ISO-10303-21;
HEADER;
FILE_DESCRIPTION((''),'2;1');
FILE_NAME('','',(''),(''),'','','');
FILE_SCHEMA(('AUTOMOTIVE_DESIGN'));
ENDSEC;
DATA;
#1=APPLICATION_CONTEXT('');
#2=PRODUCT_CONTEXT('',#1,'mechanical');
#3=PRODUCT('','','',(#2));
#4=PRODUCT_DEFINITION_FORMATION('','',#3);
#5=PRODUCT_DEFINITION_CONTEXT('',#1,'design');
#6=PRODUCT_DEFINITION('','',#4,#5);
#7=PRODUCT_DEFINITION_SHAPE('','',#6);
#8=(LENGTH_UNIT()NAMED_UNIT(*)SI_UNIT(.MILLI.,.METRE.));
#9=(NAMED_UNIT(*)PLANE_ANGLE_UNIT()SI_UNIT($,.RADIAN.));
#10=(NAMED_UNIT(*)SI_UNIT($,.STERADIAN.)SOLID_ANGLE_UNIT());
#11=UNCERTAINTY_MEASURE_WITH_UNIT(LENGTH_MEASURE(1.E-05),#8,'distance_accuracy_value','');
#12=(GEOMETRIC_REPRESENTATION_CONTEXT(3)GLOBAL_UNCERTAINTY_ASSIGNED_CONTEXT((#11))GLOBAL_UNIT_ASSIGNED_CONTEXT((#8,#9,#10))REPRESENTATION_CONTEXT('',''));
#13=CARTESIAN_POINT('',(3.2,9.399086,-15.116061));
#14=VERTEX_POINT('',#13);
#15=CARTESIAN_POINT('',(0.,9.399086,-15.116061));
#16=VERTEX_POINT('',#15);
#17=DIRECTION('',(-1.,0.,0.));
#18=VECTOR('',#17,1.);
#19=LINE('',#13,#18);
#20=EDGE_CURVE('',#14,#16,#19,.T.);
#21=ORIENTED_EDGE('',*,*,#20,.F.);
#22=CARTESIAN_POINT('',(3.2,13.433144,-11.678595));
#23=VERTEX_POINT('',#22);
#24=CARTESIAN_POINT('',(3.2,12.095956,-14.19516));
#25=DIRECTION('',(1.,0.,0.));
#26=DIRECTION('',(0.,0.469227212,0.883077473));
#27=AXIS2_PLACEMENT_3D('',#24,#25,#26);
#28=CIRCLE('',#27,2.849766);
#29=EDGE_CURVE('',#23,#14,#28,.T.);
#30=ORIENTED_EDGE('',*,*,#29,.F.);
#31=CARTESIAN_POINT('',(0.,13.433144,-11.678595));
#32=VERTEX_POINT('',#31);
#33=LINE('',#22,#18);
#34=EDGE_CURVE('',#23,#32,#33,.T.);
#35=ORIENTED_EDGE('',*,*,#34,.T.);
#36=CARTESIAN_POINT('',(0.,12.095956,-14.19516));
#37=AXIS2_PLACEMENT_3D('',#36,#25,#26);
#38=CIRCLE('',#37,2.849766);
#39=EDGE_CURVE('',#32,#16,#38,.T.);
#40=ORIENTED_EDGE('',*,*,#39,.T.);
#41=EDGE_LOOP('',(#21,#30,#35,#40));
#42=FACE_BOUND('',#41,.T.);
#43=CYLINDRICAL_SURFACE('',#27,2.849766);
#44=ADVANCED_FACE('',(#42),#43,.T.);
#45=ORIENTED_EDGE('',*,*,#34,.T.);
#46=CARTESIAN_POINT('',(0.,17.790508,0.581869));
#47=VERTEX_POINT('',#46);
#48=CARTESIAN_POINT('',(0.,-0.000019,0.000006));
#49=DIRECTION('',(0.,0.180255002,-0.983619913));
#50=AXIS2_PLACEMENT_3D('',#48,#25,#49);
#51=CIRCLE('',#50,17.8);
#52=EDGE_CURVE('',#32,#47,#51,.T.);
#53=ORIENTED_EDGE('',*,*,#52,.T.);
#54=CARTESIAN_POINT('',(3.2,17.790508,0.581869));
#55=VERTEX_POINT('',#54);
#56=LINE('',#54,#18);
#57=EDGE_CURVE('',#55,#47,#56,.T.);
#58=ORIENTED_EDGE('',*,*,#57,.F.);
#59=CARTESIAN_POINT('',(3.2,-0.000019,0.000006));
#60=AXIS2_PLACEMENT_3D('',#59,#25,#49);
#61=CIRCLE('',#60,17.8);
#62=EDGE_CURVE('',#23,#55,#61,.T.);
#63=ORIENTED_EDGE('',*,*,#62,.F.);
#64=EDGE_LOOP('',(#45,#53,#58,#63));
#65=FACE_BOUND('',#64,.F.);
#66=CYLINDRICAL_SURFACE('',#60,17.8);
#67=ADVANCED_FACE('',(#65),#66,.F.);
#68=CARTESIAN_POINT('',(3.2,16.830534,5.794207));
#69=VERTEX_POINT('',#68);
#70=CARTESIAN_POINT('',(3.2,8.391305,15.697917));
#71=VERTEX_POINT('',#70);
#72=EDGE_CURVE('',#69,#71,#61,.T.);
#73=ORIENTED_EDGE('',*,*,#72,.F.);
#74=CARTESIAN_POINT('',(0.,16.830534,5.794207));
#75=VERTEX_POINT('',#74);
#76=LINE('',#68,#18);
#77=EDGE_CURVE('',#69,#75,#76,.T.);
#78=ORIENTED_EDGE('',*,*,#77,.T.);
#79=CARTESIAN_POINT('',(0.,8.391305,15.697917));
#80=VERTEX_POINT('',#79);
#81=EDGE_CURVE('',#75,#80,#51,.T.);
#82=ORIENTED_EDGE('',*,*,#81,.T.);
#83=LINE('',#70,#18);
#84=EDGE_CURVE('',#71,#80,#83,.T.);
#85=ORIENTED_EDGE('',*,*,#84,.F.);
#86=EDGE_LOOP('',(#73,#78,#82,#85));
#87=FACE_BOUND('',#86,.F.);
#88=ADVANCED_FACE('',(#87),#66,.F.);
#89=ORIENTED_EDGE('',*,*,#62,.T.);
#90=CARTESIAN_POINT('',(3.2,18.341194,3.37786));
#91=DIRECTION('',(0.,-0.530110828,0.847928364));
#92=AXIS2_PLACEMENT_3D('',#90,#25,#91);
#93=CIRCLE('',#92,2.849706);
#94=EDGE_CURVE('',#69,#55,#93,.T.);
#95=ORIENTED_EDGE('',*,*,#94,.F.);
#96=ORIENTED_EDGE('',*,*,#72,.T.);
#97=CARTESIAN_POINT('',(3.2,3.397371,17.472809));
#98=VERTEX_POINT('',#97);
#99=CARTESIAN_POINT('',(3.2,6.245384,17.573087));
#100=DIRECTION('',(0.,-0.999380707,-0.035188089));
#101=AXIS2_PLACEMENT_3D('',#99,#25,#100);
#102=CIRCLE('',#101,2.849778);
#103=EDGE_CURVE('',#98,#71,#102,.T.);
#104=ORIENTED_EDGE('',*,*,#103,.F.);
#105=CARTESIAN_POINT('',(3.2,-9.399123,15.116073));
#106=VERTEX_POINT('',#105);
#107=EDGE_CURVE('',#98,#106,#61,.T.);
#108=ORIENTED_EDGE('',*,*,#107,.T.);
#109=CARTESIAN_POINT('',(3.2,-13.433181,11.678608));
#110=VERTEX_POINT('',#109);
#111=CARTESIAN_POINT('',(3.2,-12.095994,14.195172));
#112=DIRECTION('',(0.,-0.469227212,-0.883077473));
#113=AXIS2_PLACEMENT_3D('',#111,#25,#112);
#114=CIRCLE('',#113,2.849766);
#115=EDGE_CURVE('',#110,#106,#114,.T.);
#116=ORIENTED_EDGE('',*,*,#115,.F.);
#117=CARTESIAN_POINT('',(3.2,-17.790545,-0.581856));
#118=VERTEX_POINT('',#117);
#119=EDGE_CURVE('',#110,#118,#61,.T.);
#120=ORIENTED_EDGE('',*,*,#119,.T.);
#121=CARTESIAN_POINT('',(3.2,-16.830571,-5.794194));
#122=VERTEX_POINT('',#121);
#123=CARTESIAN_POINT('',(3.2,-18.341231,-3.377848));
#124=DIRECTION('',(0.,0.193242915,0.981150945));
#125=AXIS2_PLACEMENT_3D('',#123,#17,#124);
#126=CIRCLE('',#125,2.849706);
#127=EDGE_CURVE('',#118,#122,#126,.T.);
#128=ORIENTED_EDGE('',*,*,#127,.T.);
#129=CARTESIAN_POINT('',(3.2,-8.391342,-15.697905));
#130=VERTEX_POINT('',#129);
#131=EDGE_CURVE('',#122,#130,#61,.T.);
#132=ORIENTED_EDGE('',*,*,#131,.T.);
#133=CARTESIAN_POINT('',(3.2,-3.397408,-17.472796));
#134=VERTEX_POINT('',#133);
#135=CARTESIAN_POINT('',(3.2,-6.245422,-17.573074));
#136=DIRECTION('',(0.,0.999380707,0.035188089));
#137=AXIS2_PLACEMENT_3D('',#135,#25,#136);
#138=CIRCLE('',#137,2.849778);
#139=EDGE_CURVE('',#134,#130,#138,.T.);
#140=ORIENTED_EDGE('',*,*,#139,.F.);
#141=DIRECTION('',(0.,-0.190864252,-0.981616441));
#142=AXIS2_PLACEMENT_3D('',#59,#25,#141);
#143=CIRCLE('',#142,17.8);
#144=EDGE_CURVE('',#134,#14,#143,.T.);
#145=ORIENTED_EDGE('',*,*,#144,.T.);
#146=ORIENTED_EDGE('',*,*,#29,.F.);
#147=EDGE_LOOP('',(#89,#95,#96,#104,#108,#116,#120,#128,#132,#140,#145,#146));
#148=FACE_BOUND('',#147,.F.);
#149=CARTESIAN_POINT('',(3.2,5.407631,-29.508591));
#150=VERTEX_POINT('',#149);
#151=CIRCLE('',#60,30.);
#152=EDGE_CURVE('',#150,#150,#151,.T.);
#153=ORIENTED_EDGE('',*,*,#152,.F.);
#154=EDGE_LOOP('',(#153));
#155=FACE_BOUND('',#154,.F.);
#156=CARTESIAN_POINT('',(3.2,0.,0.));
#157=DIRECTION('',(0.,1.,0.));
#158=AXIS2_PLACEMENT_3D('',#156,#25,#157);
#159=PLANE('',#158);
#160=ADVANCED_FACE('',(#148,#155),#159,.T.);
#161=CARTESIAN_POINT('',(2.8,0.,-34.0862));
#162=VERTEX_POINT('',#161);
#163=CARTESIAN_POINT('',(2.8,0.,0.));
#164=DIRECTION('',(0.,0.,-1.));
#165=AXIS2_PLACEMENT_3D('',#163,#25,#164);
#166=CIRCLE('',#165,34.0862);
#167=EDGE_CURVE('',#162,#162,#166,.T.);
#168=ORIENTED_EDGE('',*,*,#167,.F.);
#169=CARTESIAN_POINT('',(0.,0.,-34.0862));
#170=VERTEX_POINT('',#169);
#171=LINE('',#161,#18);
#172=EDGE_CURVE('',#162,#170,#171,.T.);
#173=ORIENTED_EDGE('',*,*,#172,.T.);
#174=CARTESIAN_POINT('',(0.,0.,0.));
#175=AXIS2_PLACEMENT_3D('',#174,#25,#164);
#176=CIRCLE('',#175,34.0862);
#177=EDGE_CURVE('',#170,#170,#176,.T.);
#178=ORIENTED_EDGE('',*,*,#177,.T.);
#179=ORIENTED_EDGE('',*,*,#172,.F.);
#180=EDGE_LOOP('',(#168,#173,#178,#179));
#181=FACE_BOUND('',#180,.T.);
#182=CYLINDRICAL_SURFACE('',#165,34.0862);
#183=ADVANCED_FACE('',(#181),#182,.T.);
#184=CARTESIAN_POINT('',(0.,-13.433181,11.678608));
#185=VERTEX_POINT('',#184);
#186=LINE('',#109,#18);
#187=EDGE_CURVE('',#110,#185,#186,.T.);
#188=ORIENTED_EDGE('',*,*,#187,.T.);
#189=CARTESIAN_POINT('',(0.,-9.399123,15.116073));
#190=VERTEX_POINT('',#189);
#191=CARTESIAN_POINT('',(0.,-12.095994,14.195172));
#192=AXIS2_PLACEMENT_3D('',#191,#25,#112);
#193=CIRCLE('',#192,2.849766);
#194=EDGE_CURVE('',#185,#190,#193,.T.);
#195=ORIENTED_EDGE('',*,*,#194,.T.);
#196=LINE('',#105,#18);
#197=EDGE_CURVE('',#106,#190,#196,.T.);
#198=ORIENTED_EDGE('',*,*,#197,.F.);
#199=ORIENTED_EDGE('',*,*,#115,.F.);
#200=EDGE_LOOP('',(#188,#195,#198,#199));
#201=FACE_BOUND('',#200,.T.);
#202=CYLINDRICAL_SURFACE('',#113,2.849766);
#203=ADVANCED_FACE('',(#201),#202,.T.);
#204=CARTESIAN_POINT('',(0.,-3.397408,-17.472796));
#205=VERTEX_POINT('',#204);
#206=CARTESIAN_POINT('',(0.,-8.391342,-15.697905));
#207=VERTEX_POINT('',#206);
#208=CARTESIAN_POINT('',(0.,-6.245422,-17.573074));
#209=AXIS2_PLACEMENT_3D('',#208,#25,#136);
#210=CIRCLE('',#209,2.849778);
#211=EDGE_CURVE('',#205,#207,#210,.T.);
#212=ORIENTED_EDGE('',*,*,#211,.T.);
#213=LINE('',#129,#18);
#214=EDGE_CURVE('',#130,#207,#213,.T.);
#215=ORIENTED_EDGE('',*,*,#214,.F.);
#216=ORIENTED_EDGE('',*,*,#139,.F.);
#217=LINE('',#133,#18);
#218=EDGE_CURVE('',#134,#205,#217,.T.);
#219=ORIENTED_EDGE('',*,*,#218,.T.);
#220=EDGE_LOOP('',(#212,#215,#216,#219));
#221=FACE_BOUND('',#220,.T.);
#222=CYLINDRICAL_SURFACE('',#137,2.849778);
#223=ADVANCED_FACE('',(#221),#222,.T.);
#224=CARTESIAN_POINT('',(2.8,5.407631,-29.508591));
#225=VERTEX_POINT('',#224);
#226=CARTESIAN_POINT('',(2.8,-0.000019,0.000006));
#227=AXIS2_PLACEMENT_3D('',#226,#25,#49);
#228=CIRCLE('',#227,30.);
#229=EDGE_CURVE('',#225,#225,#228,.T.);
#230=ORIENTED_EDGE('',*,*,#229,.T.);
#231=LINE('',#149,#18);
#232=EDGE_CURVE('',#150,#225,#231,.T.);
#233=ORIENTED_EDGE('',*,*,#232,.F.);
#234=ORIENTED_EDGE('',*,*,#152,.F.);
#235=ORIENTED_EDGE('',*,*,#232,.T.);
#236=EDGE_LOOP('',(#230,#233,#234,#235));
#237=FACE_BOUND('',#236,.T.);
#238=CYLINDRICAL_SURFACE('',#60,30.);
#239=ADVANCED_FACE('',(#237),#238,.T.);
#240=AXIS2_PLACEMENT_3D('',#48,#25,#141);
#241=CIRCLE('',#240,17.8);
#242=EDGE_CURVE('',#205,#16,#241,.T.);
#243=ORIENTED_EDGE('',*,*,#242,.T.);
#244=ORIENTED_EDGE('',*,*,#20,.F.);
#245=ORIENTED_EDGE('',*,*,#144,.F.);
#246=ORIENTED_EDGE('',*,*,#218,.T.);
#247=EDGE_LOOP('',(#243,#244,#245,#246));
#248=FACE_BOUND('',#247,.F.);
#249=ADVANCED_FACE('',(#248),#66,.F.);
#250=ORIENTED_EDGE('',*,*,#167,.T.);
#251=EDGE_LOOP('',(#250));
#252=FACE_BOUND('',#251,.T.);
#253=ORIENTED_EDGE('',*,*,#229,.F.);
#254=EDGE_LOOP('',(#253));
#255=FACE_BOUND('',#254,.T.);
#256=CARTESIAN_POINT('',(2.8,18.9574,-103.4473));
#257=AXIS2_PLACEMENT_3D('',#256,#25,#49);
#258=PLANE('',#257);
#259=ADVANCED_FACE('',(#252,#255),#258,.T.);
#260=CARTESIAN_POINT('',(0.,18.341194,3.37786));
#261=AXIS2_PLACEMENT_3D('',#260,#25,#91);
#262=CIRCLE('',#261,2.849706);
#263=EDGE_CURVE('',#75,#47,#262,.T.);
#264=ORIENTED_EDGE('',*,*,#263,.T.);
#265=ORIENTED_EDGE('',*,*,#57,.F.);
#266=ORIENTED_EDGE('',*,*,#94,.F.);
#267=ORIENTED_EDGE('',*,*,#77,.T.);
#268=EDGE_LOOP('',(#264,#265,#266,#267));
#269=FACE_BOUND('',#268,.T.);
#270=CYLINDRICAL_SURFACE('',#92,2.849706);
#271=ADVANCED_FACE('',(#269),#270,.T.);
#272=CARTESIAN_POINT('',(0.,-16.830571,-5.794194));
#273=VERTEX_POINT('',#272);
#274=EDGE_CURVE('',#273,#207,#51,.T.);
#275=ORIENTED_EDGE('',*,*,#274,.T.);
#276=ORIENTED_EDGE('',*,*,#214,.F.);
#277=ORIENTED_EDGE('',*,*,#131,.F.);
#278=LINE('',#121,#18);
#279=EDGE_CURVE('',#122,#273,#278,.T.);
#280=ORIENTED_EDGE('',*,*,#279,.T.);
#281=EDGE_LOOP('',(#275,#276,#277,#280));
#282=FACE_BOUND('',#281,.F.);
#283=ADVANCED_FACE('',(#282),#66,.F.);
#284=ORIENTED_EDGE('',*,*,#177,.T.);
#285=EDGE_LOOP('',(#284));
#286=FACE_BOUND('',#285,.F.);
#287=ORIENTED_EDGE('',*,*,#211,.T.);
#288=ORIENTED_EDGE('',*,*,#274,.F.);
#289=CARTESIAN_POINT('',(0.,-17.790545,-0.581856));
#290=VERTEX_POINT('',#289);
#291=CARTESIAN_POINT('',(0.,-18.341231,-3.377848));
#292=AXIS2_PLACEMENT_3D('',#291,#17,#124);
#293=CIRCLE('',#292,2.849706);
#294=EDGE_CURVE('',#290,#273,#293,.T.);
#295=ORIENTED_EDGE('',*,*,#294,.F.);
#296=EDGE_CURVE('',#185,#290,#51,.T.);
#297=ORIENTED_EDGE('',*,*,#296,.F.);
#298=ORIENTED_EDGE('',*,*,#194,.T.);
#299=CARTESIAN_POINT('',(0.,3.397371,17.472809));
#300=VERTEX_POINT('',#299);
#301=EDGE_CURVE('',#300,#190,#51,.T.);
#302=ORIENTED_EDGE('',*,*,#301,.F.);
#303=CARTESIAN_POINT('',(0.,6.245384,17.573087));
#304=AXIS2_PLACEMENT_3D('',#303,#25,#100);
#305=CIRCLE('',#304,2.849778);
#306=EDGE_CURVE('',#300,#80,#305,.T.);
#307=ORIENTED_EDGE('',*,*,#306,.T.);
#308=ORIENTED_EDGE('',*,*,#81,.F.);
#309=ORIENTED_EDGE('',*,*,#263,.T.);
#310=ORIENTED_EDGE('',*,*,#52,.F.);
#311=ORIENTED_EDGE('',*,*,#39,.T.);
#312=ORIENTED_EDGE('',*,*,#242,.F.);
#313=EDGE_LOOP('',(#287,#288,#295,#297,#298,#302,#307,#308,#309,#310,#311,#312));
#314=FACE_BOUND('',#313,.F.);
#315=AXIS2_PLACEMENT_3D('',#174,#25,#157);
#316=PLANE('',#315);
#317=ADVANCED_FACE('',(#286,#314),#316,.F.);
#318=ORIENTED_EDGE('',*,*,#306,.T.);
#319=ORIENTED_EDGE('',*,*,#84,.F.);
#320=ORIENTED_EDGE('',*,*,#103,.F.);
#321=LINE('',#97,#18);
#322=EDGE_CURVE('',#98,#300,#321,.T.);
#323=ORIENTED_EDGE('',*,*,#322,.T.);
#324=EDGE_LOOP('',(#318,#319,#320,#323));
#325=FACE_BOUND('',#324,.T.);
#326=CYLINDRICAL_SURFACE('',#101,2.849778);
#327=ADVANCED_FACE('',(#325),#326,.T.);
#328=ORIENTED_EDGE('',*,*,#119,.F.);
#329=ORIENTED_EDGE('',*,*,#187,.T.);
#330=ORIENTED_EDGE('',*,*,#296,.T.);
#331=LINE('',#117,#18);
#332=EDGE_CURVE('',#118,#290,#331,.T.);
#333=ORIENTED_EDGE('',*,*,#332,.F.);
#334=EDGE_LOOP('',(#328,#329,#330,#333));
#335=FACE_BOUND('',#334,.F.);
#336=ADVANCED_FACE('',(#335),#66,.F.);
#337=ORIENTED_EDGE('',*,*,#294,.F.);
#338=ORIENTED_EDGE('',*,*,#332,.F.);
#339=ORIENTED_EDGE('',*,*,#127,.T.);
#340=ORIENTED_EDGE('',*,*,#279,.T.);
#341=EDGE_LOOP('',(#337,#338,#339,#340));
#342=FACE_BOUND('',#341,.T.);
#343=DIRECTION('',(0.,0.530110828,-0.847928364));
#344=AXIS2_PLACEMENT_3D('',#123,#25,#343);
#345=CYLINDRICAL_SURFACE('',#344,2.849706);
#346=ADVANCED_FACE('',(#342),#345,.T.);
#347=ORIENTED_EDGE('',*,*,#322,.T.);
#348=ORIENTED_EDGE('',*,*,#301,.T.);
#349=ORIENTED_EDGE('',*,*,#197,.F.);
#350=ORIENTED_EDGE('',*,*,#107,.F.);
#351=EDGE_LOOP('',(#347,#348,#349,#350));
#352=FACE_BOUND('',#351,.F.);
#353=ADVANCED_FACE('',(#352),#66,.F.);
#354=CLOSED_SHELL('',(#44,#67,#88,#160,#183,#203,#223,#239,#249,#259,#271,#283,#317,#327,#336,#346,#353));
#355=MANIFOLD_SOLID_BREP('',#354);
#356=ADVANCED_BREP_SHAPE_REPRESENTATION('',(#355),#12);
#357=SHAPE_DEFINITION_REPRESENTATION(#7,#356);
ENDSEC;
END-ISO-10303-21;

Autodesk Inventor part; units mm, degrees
ref_plane "YZ Plane" through (0, 0, 0) normal (1, 0, 0) x (0, 1, 0)
ref_plane "XZ Plane" through (0, 0, 0) normal (0, 1, 0) x (-1, 0, 0)
ref_plane "XY Plane" through (0, 0, 0) normal (0, 0, 1) x (1, 0, 0)
sketch "Sketch_1" plane through (0, 0, 0) normal (0, 0, 1) x (1, 0, 0)
  line L0 (7.2, 0) -> (0, 0)
  line L1 (0, 8.5) -> (3.2, 8.5)
  line L2 (3.2, 8.5) -> (3.2, 105.8394)
  arc A0 (3.2, 105.8394) -> (2.2899, 109) centre (-4.7294, 105.2675) ccw
  line L3 (2.2899, 109) -> (0.7899, 109)
  arc A1 (0.7899, 109) -> (0, 105.8394) centre (7.9441, 105.5329) ccw
  line L4 (0, 105.8394) -> (0, 8.5)
  dimension "d16" = 1.5
  dimension "d17" = 3.2
revolve "Revolution1" add sketch "Sketch_1" angle 360 about axis through (7.2, 0, 0) along (1, 0, 0)
sketch "Sketch_2" plane through (3.6, 0, 0) normal (1, 0, 0) x (0, 0, -1)
  circle A0 centre (0, 0) radius 145.3333
  arc A1 (-108.9989, 0.5) -> (-108.9989, -0.5) centre (0, 0) ccw
  line L0 (-108.9989, -0.5) -> (-103.5248, -2.6502)
  arc A2 (-103.0895, -9.8477) -> (-103.5248, -2.6502) centre (-104.9781, -6.35) ccw
  line L1 (-103.0895, -9.8477) -> (-108.2644, -12.642)
  arc A3 (-108.2644, -12.642) -> (-108.1439, -13.6347) centre (0, 0) ccw
  line L2 (-108.1439, -13.6347) -> (-102.4506, -15.1094)
  arc A4 (-101.1508, -22.2019) -> (-102.4506, -15.1094) centre (-103.4473, -18.9574) ccw
  line L3 (-101.1508, -22.2019) -> (-105.9512, -25.5997)
  arc A5 (-105.9512, -25.5997) -> (-105.7119, -26.5706) centre (0, 0) ccw
  line L4 (-105.7119, -26.5706) -> (-99.8824, -27.3483)
  arc A6 (-97.7372, -34.2324) -> (-99.8824, -27.3483) centre (-100.408, -31.2884) ccw
  line L5 (-97.7372, -34.2324) -> (-102.093, -38.184)
  arc A7 (-102.093, -38.184) -> (-101.7384, -39.119) centre (0, 0) ccw
  line L6 (-101.7384, -39.119) -> (-95.8576, -39.1884)
  arc A8 (-92.8983, -45.7638) -> (-95.8576, -39.1884) centre (-95.9045, -43.1631) ccw
  line L7 (-92.8983, -45.7638) -> (-96.7461, -50.2116)
  arc A9 (-96.7461, -50.2116) -> (-96.2813, -51.097) centre (0, 0) ccw
  line L8 (-96.2813, -51.097) -> (-90.4351, -50.457)
  arc A10 (-86.7048, -56.6277) -> (-90.4351, -50.457) centre (-90.0025, -54.4084) ccw
  line L9 (-86.7048, -56.6277) -> (-89.9883, -61.5069)
  arc A11 (-89.9883, -61.5069) -> (-89.4203, -62.3299) centre (0, 0) ccw
  line L10 (-89.4203, -62.3299) -> (-83.6938, -60.9899)
  arc A12 (-79.2469, -66.666) -> (-83.6938, -60.9899) centre (-82.7881, -64.8603) ccw
  line L11 (-79.2469, -66.666) -> (-81.9184, -71.9054)
  arc A13 (-81.9184, -71.9054) -> (-81.2553, -72.6539) centre (0, 0) ccw
  line L12 (-81.2553, -72.6539) -> (-75.732, -70.6334)
  arc A14 (-70.6334, -75.732) -> (-75.732, -70.6334) centre (-74.3664, -74.3664) ccw
  line L13 (-70.6334, -75.732) -> (-72.6539, -81.2553)
  arc A15 (-72.6539, -81.2553) -> (-71.9054, -81.9184) centre (0, 0) ccw
  line L14 (-71.9054, -81.9184) -> (-66.666, -79.2469)
  arc A16 (-60.9899, -83.6938) -> (-66.666, -79.2469) centre (-64.8603, -82.7881) ccw
  line L15 (-60.9899, -83.6938) -> (-62.3299, -89.4203)
  arc A17 (-62.3299, -89.4203) -> (-61.5069, -89.9883) centre (0, 0) ccw
  line L16 (-61.5069, -89.9883) -> (-56.6277, -86.7048)
  arc A18 (-50.457, -90.4351) -> (-56.6277, -86.7048) centre (-54.4084, -90.0025) ccw
  line L17 (-50.457, -90.4351) -> (-51.097, -96.2813)
  arc A19 (-51.097, -96.2813) -> (-50.2116, -96.7461) centre (0, 0) ccw
  line L18 (-50.2116, -96.7461) -> (-45.7638, -92.8983)
  arc A20 (-39.1884, -95.8576) -> (-45.7638, -92.8983) centre (-43.1631, -95.9045) ccw
  line L19 (-39.1884, -95.8576) -> (-39.119, -101.7384)
  arc A21 (-39.119, -101.7384) -> (-38.184, -102.093) centre (0, 0) ccw
  line L20 (-38.184, -102.093) -> (-34.2324, -97.7372)
  arc A22 (-27.3483, -99.8824) -> (-34.2324, -97.7372) centre (-31.2884, -100.408) ccw
  line L21 (-27.3483, -99.8824) -> (-26.5706, -105.7119)
  arc A23 (-26.5706, -105.7119) -> (-25.5997, -105.9512) centre (0, 0) ccw
  line L22 (-25.5997, -105.9512) -> (-22.2019, -101.1508)
  arc A24 (-15.1094, -102.4506) -> (-22.2019, -101.1508) centre (-18.9574, -103.4473) ccw
  line L23 (-15.1094, -102.4506) -> (-13.6347, -108.1439)
  arc A25 (-13.6347, -108.1439) -> (-12.642, -108.2644) centre (0, 0) ccw
  line L24 (-12.642, -108.2644) -> (-9.8477, -103.0895)
  arc A26 (-2.6502, -103.5248) -> (-9.8477, -103.0895) centre (-6.35, -104.9781) ccw
  line L25 (-2.6502, -103.5248) -> (-0.5, -108.9989)
  arc A27 (-0.5, -108.9989) -> (0.5, -108.9989) centre (0, 0) ccw
  line L26 (0.5, -108.9989) -> (2.6502, -103.5248)
  arc A28 (9.8477, -103.0895) -> (2.6502, -103.5248) centre (6.35, -104.9781) ccw
  line L27 (9.8477, -103.0895) -> (12.642, -108.2644)
  arc A29 (12.642, -108.2644) -> (13.6347, -108.1439) centre (0, 0) ccw
  line L28 (13.6347, -108.1439) -> (15.1094, -102.4506)
  arc A30 (22.2019, -101.1508) -> (15.1094, -102.4506) centre (18.9574, -103.4473) ccw
  line L29 (22.2019, -101.1508) -> (25.5997, -105.9512)
  arc A31 (25.5997, -105.9512) -> (26.5706, -105.7119) centre (0, 0) ccw
  line L30 (26.5706, -105.7119) -> (27.3483, -99.8824)
  arc A32 (34.2324, -97.7372) -> (27.3483, -99.8824) centre (31.2884, -100.408) ccw
  line L31 (34.2324, -97.7372) -> (38.184, -102.093)
  arc A33 (38.184, -102.093) -> (39.119, -101.7384) centre (0, 0) ccw
  line L32 (39.119, -101.7384) -> (39.1884, -95.8576)
  arc A34 (45.7638, -92.8983) -> (39.1884, -95.8576) centre (43.1631, -95.9045) ccw
  line L33 (45.7638, -92.8983) -> (50.2116, -96.7461)
  arc A35 (50.2116, -96.7461) -> (51.097, -96.2813) centre (0, 0) ccw
  line L34 (51.097, -96.2813) -> (50.457, -90.4351)
  arc A36 (56.6277, -86.7048) -> (50.457, -90.4351) centre (54.4084, -90.0025) ccw
  line L35 (56.6277, -86.7048) -> (61.5069, -89.9883)
  arc A37 (61.5069, -89.9883) -> (62.3299, -89.4203) centre (0, 0) ccw
  line L36 (62.3299, -89.4203) -> (60.9899, -83.6938)
  arc A38 (66.666, -79.2469) -> (60.9899, -83.6938) centre (64.8603, -82.7881) ccw
  line L37 (66.666, -79.2469) -> (71.9054, -81.9184)
  arc A39 (71.9054, -81.9184) -> (72.6539, -81.2553) centre (0, 0) ccw
  line L38 (72.6539, -81.2553) -> (70.6334, -75.732)
  arc A40 (75.732, -70.6334) -> (70.6334, -75.732) centre (74.3664, -74.3664) ccw
  line L39 (75.732, -70.6334) -> (81.2553, -72.6539)
  arc A41 (81.2553, -72.6539) -> (81.9184, -71.9054) centre (0, 0) ccw
  line L40 (81.9184, -71.9054) -> (79.2469, -66.666)
  arc A42 (83.6938, -60.9899) -> (79.2469, -66.666) centre (82.7881, -64.8603) ccw
  line L41 (83.6938, -60.9899) -> (89.4203, -62.3299)
  arc A43 (89.4203, -62.3299) -> (89.9883, -61.5069) centre (0, 0) ccw
  line L42 (89.9883, -61.5069) -> (86.7048, -56.6277)
  arc A44 (90.4351, -50.457) -> (86.7048, -56.6277) centre (90.0025, -54.4084) ccw
  line L43 (90.4351, -50.457) -> (96.2813, -51.097)
  arc A45 (96.2813, -51.097) -> (96.7461, -50.2116) centre (0, 0) ccw
  line L44 (96.7461, -50.2116) -> (92.8983, -45.7638)
  arc A46 (95.8576, -39.1884) -> (92.8983, -45.7638) centre (95.9045, -43.1631) ccw
  line L45 (95.8576, -39.1884) -> (101.7384, -39.119)
  arc A47 (101.7384, -39.119) -> (102.093, -38.184) centre (0, 0) ccw
  line L46 (102.093, -38.184) -> (97.7372, -34.2324)
  arc A48 (99.8824, -27.3483) -> (97.7372, -34.2324) centre (100.408, -31.2884) ccw
  line L47 (99.8824, -27.3483) -> (105.7119, -26.5706)
  arc A49 (105.7119, -26.5706) -> (105.9512, -25.5997) centre (0, 0) ccw
  line L48 (105.9512, -25.5997) -> (101.1508, -22.2019)
  arc A50 (102.4506, -15.1094) -> (101.1508, -22.2019) centre (103.4473, -18.9574) ccw
  line L49 (102.4506, -15.1094) -> (108.1439, -13.6347)
  arc A51 (108.1439, -13.6347) -> (108.2644, -12.642) centre (0, 0) ccw
  line L50 (108.2644, -12.642) -> (103.0895, -9.8477)
  arc A52 (103.5248, -2.6502) -> (103.0895, -9.8477) centre (104.9781, -6.35) ccw
  line L51 (103.5248, -2.6502) -> (108.9989, -0.5)
  arc A53 (108.9989, -0.5) -> (108.9989, 0.5) centre (0, 0) ccw
  line L52 (108.9989, 0.5) -> (103.5248, 2.6502)
  arc A54 (103.0895, 9.8477) -> (103.5248, 2.6502) centre (104.9781, 6.35) ccw
  line L53 (103.0895, 9.8477) -> (108.2644, 12.642)
  arc A55 (108.2644, 12.642) -> (108.1439, 13.6347) centre (0, 0) ccw
  line L54 (108.1439, 13.6347) -> (102.4506, 15.1094)
  arc A56 (101.1508, 22.2019) -> (102.4506, 15.1094) centre (103.4473, 18.9574) ccw
  line L55 (101.1508, 22.2019) -> (105.9512, 25.5997)
  arc A57 (105.9512, 25.5997) -> (105.7119, 26.5706) centre (0, 0) ccw
  line L56 (105.7119, 26.5706) -> (99.8824, 27.3483)
  arc A58 (97.7372, 34.2324) -> (99.8824, 27.3483) centre (100.408, 31.2884) ccw
  line L57 (97.7372, 34.2324) -> (102.093, 38.184)
  arc A59 (102.093, 38.184) -> (101.7384, 39.119) centre (0, 0) ccw
  line L58 (101.7384, 39.119) -> (95.8576, 39.1884)
  arc A60 (92.8983, 45.7638) -> (95.8576, 39.1884) centre (95.9045, 43.1631) ccw
  line L59 (92.8983, 45.7638) -> (96.7461, 50.2116)
  arc A61 (96.7461, 50.2116) -> (96.2813, 51.097) centre (0, 0) ccw
  line L60 (96.2813, 51.097) -> (90.4351, 50.457)
  arc A62 (86.7048, 56.6277) -> (90.4351, 50.457) centre (90.0025, 54.4084) ccw
  line L61 (86.7048, 56.6277) -> (89.9883, 61.5069)
  arc A63 (89.9883, 61.5069) -> (89.4203, 62.3299) centre (0, 0) ccw
  line L62 (89.4203, 62.3299) -> (83.6938, 60.9899)
  arc A64 (79.2469, 66.666) -> (83.6938, 60.9899) centre (82.7881, 64.8603) ccw
  line L63 (79.2469, 66.666) -> (81.9184, 71.9054)
  arc A65 (81.9184, 71.9054) -> (81.2553, 72.6539) centre (0, 0) ccw
  line L64 (81.2553, 72.6539) -> (75.732, 70.6334)
  arc A66 (70.6334, 75.732) -> (75.732, 70.6334) centre (74.3664, 74.3664) ccw
  line L65 (70.6334, 75.732) -> (72.6539, 81.2553)
  arc A67 (72.6539, 81.2553) -> (71.9054, 81.9184) centre (0, 0) ccw
  line L66 (71.9054, 81.9184) -> (66.666, 79.2469)
  arc A68 (60.9899, 83.6938) -> (66.666, 79.2469) centre (64.8603, 82.7881) ccw
  line L67 (60.9899, 83.6938) -> (62.3299, 89.4203)
  arc A69 (62.3299, 89.4203) -> (61.5069, 89.9883) centre (0, 0) ccw
  line L68 (61.5069, 89.9883) -> (56.6277, 86.7048)
  arc A70 (50.457, 90.4351) -> (56.6277, 86.7048) centre (54.4084, 90.0025) ccw
  line L69 (50.457, 90.4351) -> (51.097, 96.2813)
  arc A71 (51.097, 96.2813) -> (50.2116, 96.7461) centre (0, 0) ccw
  line L70 (50.2116, 96.7461) -> (45.7638, 92.8983)
  arc A72 (39.1884, 95.8576) -> (45.7638, 92.8983) centre (43.1631, 95.9045) ccw
  line L71 (39.1884, 95.8576) -> (39.119, 101.7384)
  arc A73 (39.119, 101.7384) -> (38.184, 102.093) centre (0, 0) ccw
  line L72 (38.184, 102.093) -> (34.2324, 97.7372)
  arc A74 (27.3483, 99.8824) -> (34.2324, 97.7372) centre (31.2884, 100.408) ccw
  line L73 (27.3483, 99.8824) -> (26.5706, 105.7119)
  arc A75 (26.5706, 105.7119) -> (25.5997, 105.9512) centre (0, 0) ccw
  line L74 (25.5997, 105.9512) -> (22.2019, 101.1508)
  arc A76 (15.1094, 102.4506) -> (22.2019, 101.1508) centre (18.9574, 103.4473) ccw
  line L75 (15.1094, 102.4506) -> (13.6347, 108.1439)
  arc A77 (13.6347, 108.1439) -> (12.642, 108.2644) centre (0, 0) ccw
  line L76 (12.642, 108.2644) -> (9.8477, 103.0895)
  arc A78 (2.6502, 103.5248) -> (9.8477, 103.0895) centre (6.35, 104.9781) ccw
  line L77 (2.6502, 103.5248) -> (0.5, 108.9989)
  arc A79 (0.5, 108.9989) -> (-0.5, 108.9989) centre (0, 0) ccw
  line L78 (-0.5, 108.9989) -> (-2.6502, 103.5248)
  arc A80 (-9.8477, 103.0895) -> (-2.6502, 103.5248) centre (-6.35, 104.9781) ccw
  line L79 (-9.8477, 103.0895) -> (-12.642, 108.2644)
  arc A81 (-12.642, 108.2644) -> (-13.6347, 108.1439) centre (0, 0) ccw
  line L80 (-13.6347, 108.1439) -> (-15.1094, 102.4506)
  arc A82 (-22.2019, 101.1508) -> (-15.1094, 102.4506) centre (-18.9574, 103.4473) ccw
  line L81 (-22.2019, 101.1508) -> (-25.5997, 105.9512)
  arc A83 (-25.5997, 105.9512) -> (-26.5706, 105.7119) centre (0, 0) ccw
  line L82 (-26.5706, 105.7119) -> (-27.3483, 99.8824)
  arc A84 (-34.2324, 97.7372) -> (-27.3483, 99.8824) centre (-31.2884, 100.408) ccw
  line L83 (-34.2324, 97.7372) -> (-38.184, 102.093)
  arc A85 (-38.184, 102.093) -> (-39.119, 101.7384) centre (0, 0) ccw
  line L84 (-39.119, 101.7384) -> (-39.1884, 95.8576)
  arc A86 (-45.7638, 92.8983) -> (-39.1884, 95.8576) centre (-43.1631, 95.9045) ccw
  line L85 (-45.7638, 92.8983) -> (-50.2116, 96.7461)
  arc A87 (-50.2116, 96.7461) -> (-51.097, 96.2813) centre (0, 0) ccw
  line L86 (-51.097, 96.2813) -> (-50.457, 90.4351)
  arc A88 (-56.6277, 86.7048) -> (-50.457, 90.4351) centre (-54.4084, 90.0025) ccw
  line L87 (-56.6277, 86.7048) -> (-61.5069, 89.9883)
  arc A89 (-61.5069, 89.9883) -> (-62.3299, 89.4203) centre (0, 0) ccw
  line L88 (-62.3299, 89.4203) -> (-60.9899, 83.6938)
  arc A90 (-66.666, 79.2469) -> (-60.9899, 83.6938) centre (-64.8603, 82.7881) ccw
  line L89 (-66.666, 79.2469) -> (-71.9054, 81.9184)
  arc A91 (-71.9054, 81.9184) -> (-72.6539, 81.2553) centre (0, 0) ccw
  line L90 (-72.6539, 81.2553) -> (-70.6334, 75.732)
  arc A92 (-75.732, 70.6334) -> (-70.6334, 75.732) centre (-74.3664, 74.3664) ccw
  line L91 (-75.732, 70.6334) -> (-81.2553, 72.6539)
  arc A93 (-81.2553, 72.6539) -> (-81.9184, 71.9054) centre (0, 0) ccw
  line L92 (-81.9184, 71.9054) -> (-79.2469, 66.666)
  arc A94 (-83.6938, 60.9899) -> (-79.2469, 66.666) centre (-82.7881, 64.8603) ccw
  line L93 (-83.6938, 60.9899) -> (-89.4203, 62.3299)
  arc A95 (-89.4203, 62.3299) -> (-89.9883, 61.5069) centre (0, 0) ccw
  line L94 (-89.9883, 61.5069) -> (-86.7048, 56.6277)
  arc A96 (-90.4351, 50.457) -> (-86.7048, 56.6277) centre (-90.0025, 54.4084) ccw
  line L95 (-90.4351, 50.457) -> (-96.2813, 51.097)
  arc A97 (-96.2813, 51.097) -> (-96.7461, 50.2116) centre (0, 0) ccw
  line L96 (-96.7461, 50.2116) -> (-92.8983, 45.7638)
  arc A98 (-95.8576, 39.1884) -> (-92.8983, 45.7638) centre (-95.9045, 43.1631) ccw
  line L97 (-95.8576, 39.1884) -> (-101.7384, 39.119)
  arc A99 (-101.7384, 39.119) -> (-102.093, 38.184) centre (0, 0) ccw
  line L98 (-102.093, 38.184) -> (-97.7372, 34.2324)
  arc A100 (-99.8824, 27.3483) -> (-97.7372, 34.2324) centre (-100.408, 31.2884) ccw
  line L99 (-99.8824, 27.3483) -> (-105.7119, 26.5706)
  arc A101 (-105.7119, 26.5706) -> (-105.9512, 25.5997) centre (0, 0) ccw
  line L100 (-105.9512, 25.5997) -> (-101.1508, 22.2019)
  arc A102 (-102.4506, 15.1094) -> (-101.1508, 22.2019) centre (-103.4473, 18.9574) ccw
  line L101 (-102.4506, 15.1094) -> (-108.1439, 13.6347)
  arc A103 (-108.1439, 13.6347) -> (-108.2644, 12.642) centre (0, 0) ccw
  line L102 (-108.2644, 12.642) -> (-103.0895, 9.8477)
  arc A104 (-103.5248, 2.6502) -> (-103.0895, 9.8477) centre (-104.9781, 6.35) ccw
  line L103 (-103.5248, 2.6502) -> (-108.9989, 0.5)
extrude "Extrusion1" cut sketch "Sketch_2" along normal mid plane 7.6
sketch "スケッチ4" plane through (3.2, 18.9574, -103.4473) normal (1, 0, 0) x (0, 0.180255, -0.9836199)
  line L0 (-1.9941, -8.896) -> (0.3565, -8.1331) projected
  arc A0 (0.3565, -8.1331) -> (0.5674, -4.646) centre (-105.17, 0) ccw projected
  line L1 (0.5674, -4.646) -> (-1.674, -3.6053) projected
  arc A1 (-1.674, 3.6053) -> (-1.674, -3.6053) centre (0, 0) ccw projected
  line L2 (-1.674, 3.6053) -> (0.5674, 4.646) projected
  arc A2 (0.5674, 4.646) -> (0.3565, 8.1331) centre (-105.17, 0) ccw projected
  line L3 (0.3565, 8.1331) -> (-1.9941, 8.896) projected
  arc A3 (-2.8632, 16.0541) -> (-1.9941, 8.896) centre (-0.7668, 12.6768) ccw projected
  line L4 (-2.8632, 16.0541) -> (-0.7636, 17.3574) projected
  arc A4 (-0.7636, 17.3574) -> (-1.3933, 20.7936) centre (-105.17, 0) ccw projected
  line L5 (-1.3933, 20.7936) -> (-3.8186, 21.2677) projected
  arc A5 (-5.5442, 28.2688) -> (-3.8186, 21.2677) centre (-3.056, 25.1688) ccw projected
  line L6 (-5.5442, 28.2688) -> (-3.617, 29.8157) projected
  arc A6 (-3.617, 29.8157) -> (-4.6563, 33.1509) centre (-105.17, 0) ccw projected
  line L7 (-4.6563, 33.1509) -> (-7.1211, 33.3292) projected
  arc A7 (-9.678, 40.0712) -> (-7.1211, 33.3292) centre (-6.8343, 37.2938) ccw projected
  line L8 (-9.678, 40.0712) -> (-7.9513, 41.8391) projected
  arc A8 (-7.9513, 41.8391) -> (-9.3851, 45.0247) centre (-105.17, 0) ccw projected
  line L9 (-9.3851, 45.0247) -> (-11.8534, 44.9046) projected
  arc A9 (-15.2043, 51.2893) -> (-11.8534, 44.9046) centre (-12.0466, 48.8749) ccw projected
  line L10 (-15.2043, 51.2893) -> (-13.7033, 53.2525) projected
  arc A10 (-13.7033, 53.2525) -> (-15.5106, 56.2421) centre (-105.17, 0) ccw projected
  line L11 (-15.5106, 56.2421) -> (-17.9464, 55.8253) projected
  arc A11 (-22.0425, 61.7595) -> (-17.9464, 55.8253) centre (-18.6168, 59.7434) ccw projected
  line L12 (-22.0425, 61.7595) -> (-20.7891, 63.8893) projected
  arc A12 (-20.7891, 63.8893) -> (-22.9435, 66.6392) centre (-105.17, 0) ccw projected
  line L13 (-22.9435, 66.6392) -> (-25.3114, 65.9319) projected
  arc A13 (-30.0929, 71.3291) -> (-25.3114, 65.9319) centre (-26.4491, 69.7406) ccw projected
  line L14 (-30.0929, 71.3291) -> (-29.1053, 73.5945) projected
  arc A14 (-29.1053, 73.5945) -> (-31.5755, 76.0647) centre (-105.17, 0) ccw projected
  line L15 (-31.5755, 76.0647) -> (-33.8409, 75.0771) projected
  arc A15 (-39.2381, 79.8586) -> (-33.8409, 75.0771) centre (-35.4294, 78.7209) ccw projected
  line L16 (-39.2381, 79.8586) -> (-38.5308, 82.2265) projected
  arc A16 (-38.5308, 82.2265) -> (-41.2807, 84.3809) centre (-105.17, 0) ccw projected
  line L17 (-41.2807, 84.3809) -> (-43.4105, 83.1275) projected
  arc A17 (-49.3447, 87.2236) -> (-43.4105, 83.1275) centre (-45.4266, 86.5532) ccw projected
  line L18 (-49.3447, 87.2236) -> (-48.9279, 89.6594) projected
  arc A18 (-48.9279, 89.6594) -> (-51.9175, 91.4667) centre (-105.17, 0) ccw projected
  line L19 (-51.9175, 91.4667) -> (-53.8807, 89.9657) projected
  arc A19 (-60.2654, 93.3166) -> (-53.8807, 89.9657) centre (-56.2951, 93.1234) ccw projected
  line L20 (-60.2654, 93.3166) -> (-60.1453, 95.7849) projected
  arc A20 (-60.1453, 95.7849) -> (-63.3309, 97.2187) centre (-105.17, 0) ccw projected
  line L21 (-63.3309, 97.2187) -> (-65.0988, 95.492) projected
  arc A21 (-71.8408, 98.0489) -> (-65.0988, 95.492) centre (-67.8762, 98.3357) ccw projected
  line L22 (-71.8408, 98.0489) -> (-72.0191, 100.5137) projected
  arc A22 (-72.0191, 100.5137) -> (-75.3543, 101.553) centre (-105.17, 0) ccw projected
  line L23 (-75.3543, 101.553) -> (-76.9012, 99.6258) projected
  arc A23 (-83.9023, 101.3514) -> (-76.9012, 99.6258) centre (-80.0012, 102.114) ccw projected
  line L24 (-83.9023, 101.3514) -> (-84.3764, 103.7767) projected
  arc A24 (-84.3764, 103.7767) -> (-87.8126, 104.4064) centre (-105.17, 0) ccw projected
  line L25 (-87.8126, 104.4064) -> (-89.1159, 102.3068) projected
  arc A25 (-96.274, 103.1759) -> (-89.1159, 102.3068) centre (-92.4932, 104.4032) ccw projected
  line L26 (-96.274, 103.1759) -> (-97.0369, 105.5265) projected
  arc A26 (-97.0369, 105.5265) -> (-100.524, 105.7374) centre (-105.17, 0) ccw projected
  line L27 (-100.524, 105.7374) -> (-101.5647, 103.496) projected
  arc A27 (-108.7753, 103.496) -> (-101.5647, 103.496) centre (-105.17, 105.17) ccw projected
  line L28 (-108.7753, 103.496) -> (-109.816, 105.7374) projected
  arc A28 (-109.816, 105.7374) -> (-113.3031, 105.5265) centre (-105.17, 0) ccw projected
  line L29 (-113.3031, 105.5265) -> (-114.066, 103.1759) projected
  arc A29 (-121.2241, 102.3068) -> (-114.066, 103.1759) centre (-117.8468, 104.4032) ccw projected
  line L30 (-121.2241, 102.3068) -> (-122.5274, 104.4064) projected
  arc A30 (-122.5274, 104.4064) -> (-125.9636, 103.7767) centre (-105.17, 0) ccw projected
  line L31 (-125.9636, 103.7767) -> (-126.4377, 101.3514) projected
  arc A31 (-133.4388, 99.6258) -> (-126.4377, 101.3514) centre (-130.3388, 102.114) ccw projected
  line L32 (-133.4388, 99.6258) -> (-134.9857, 101.553) projected
  arc A32 (-134.9857, 101.553) -> (-138.3209, 100.5137) centre (-105.17, 0) ccw projected
  line L33 (-138.3209, 100.5137) -> (-138.4992, 98.0489) projected
  arc A33 (-145.2412, 95.492) -> (-138.4992, 98.0489) centre (-142.4638, 98.3357) ccw projected
  line L34 (-145.2412, 95.492) -> (-147.0091, 97.2187) projected
  arc A34 (-147.0091, 97.2187) -> (-150.1947, 95.7849) centre (-105.17, 0) ccw projected
  line L35 (-150.1947, 95.7849) -> (-150.0746, 93.3166) projected
  arc A35 (-156.4593, 89.9657) -> (-150.0746, 93.3166) centre (-154.0449, 93.1234) ccw projected
  line L36 (-156.4593, 89.9657) -> (-158.4225, 91.4667) projected
  arc A36 (-158.4225, 91.4667) -> (-161.4121, 89.6594) centre (-105.17, 0) ccw projected
  line L37 (-161.4121, 89.6594) -> (-160.9953, 87.2236) projected
  arc A37 (-166.9295, 83.1275) -> (-160.9953, 87.2236) centre (-164.9134, 86.5532) ccw projected
  line L38 (-166.9295, 83.1275) -> (-169.0593, 84.3809) projected
  arc A38 (-169.0593, 84.3809) -> (-171.8092, 82.2265) centre (-105.17, 0) ccw projected
  line L39 (-171.8092, 82.2265) -> (-171.1019, 79.8586) projected
  arc A39 (-176.4991, 75.0771) -> (-171.1019, 79.8586) centre (-174.9106, 78.7209) ccw projected
  line L40 (-176.4991, 75.0771) -> (-178.7645, 76.0647) projected
  arc A40 (-178.7645, 76.0647) -> (-181.2347, 73.5945) centre (-105.17, 0) ccw projected
  line L41 (-181.2347, 73.5945) -> (-180.2471, 71.3291) projected
  arc A41 (-185.0286, 65.9319) -> (-180.2471, 71.3291) centre (-183.8909, 69.7406) ccw projected
  line L42 (-185.0286, 65.9319) -> (-187.3965, 66.6392) projected
  arc A42 (-187.3965, 66.6392) -> (-189.5509, 63.8893) centre (-105.17, 0) ccw projected
  line L43 (-189.5509, 63.8893) -> (-188.2975, 61.7595) projected
  arc A43 (-192.3936, 55.8253) -> (-188.2975, 61.7595) centre (-191.7232, 59.7434) ccw projected
  line L44 (-192.3936, 55.8253) -> (-194.8294, 56.2421) projected
  arc A44 (-194.8294, 56.2421) -> (-196.6367, 53.2525) centre (-105.17, 0) ccw projected
  line L45 (-196.6367, 53.2525) -> (-195.1357, 51.2893) projected
  arc A45 (-198.4866, 44.9046) -> (-195.1357, 51.2893) centre (-198.2934, 48.8749) ccw projected
  line L46 (-198.4866, 44.9046) -> (-200.9549, 45.0247) projected
  arc A46 (-200.9549, 45.0247) -> (-202.3887, 41.8391) centre (-105.17, 0) ccw projected
  line L47 (-202.3887, 41.8391) -> (-200.662, 40.0712) projected
  arc A47 (-203.2189, 33.3292) -> (-200.662, 40.0712) centre (-203.5057, 37.2938) ccw projected
  line L48 (-203.2189, 33.3292) -> (-205.6837, 33.1509) projected
  arc A48 (-205.6837, 33.1509) -> (-206.723, 29.8157) centre (-105.17, 0) ccw projected
  line L49 (-206.723, 29.8157) -> (-204.7958, 28.2688) projected
  arc A49 (-206.5214, 21.2677) -> (-204.7958, 28.2688) centre (-207.284, 25.1688) ccw projected
  line L50 (-206.5214, 21.2677) -> (-208.9467, 20.7936) projected
  arc A50 (-208.9467, 20.7936) -> (-209.5764, 17.3574) centre (-105.17, 0) ccw projected
  line L51 (-209.5764, 17.3574) -> (-207.4768, 16.0541) projected
  arc A51 (-208.3459, 8.896) -> (-207.4768, 16.0541) centre (-209.5732, 12.6768) ccw projected
  line L52 (-208.3459, 8.896) -> (-210.6965, 8.1331) projected
  arc A52 (-210.6965, 8.1331) -> (-210.9074, 4.646) centre (-105.17, 0) ccw projected
  line L53 (-210.9074, 4.646) -> (-208.666, 3.6053) projected
  arc A53 (-208.666, -3.6053) -> (-208.666, 3.6053) centre (-210.34, 0) ccw projected
  line L54 (-208.666, -3.6053) -> (-210.9074, -4.646) projected
  arc A54 (-210.9074, -4.646) -> (-210.6965, -8.1331) centre (-105.17, 0) ccw projected
  line L55 (-210.6965, -8.1331) -> (-208.3459, -8.896) projected
  arc A55 (-207.4768, -16.0541) -> (-208.3459, -8.896) centre (-209.5732, -12.6768) ccw projected
  line L56 (-207.4768, -16.0541) -> (-209.5764, -17.3574) projected
  arc A56 (-209.5764, -17.3574) -> (-208.9467, -20.7936) centre (-105.17, 0) ccw projected
  line L57 (-208.9467, -20.7936) -> (-206.5214, -21.2677) projected
  arc A57 (-204.7958, -28.2688) -> (-206.5214, -21.2677) centre (-207.284, -25.1688) ccw projected
  line L58 (-204.7958, -28.2688) -> (-206.723, -29.8157) projected
  arc A58 (-206.723, -29.8157) -> (-205.6837, -33.1509) centre (-105.17, 0) ccw projected
  line L59 (-205.6837, -33.1509) -> (-203.2189, -33.3292) projected
  arc A59 (-200.662, -40.0712) -> (-203.2189, -33.3292) centre (-203.5057, -37.2938) ccw projected
  line L60 (-200.662, -40.0712) -> (-202.3887, -41.8391) projected
  arc A60 (-202.3887, -41.8391) -> (-200.9549, -45.0247) centre (-105.17, 0) ccw projected
  line L61 (-200.9549, -45.0247) -> (-198.4866, -44.9046) projected
  arc A61 (-195.1357, -51.2893) -> (-198.4866, -44.9046) centre (-198.2934, -48.8749) ccw projected
  line L62 (-195.1357, -51.2893) -> (-196.6367, -53.2525) projected
  arc A62 (-196.6367, -53.2525) -> (-194.8294, -56.2421) centre (-105.17, 0) ccw projected
  line L63 (-194.8294, -56.2421) -> (-192.3936, -55.8253) projected
  arc A63 (-188.2975, -61.7595) -> (-192.3936, -55.8253) centre (-191.7232, -59.7434) ccw projected
  line L64 (-188.2975, -61.7595) -> (-189.5509, -63.8893) projected
  arc A64 (-189.5509, -63.8893) -> (-187.3965, -66.6392) centre (-105.17, 0) ccw projected
  line L65 (-187.3965, -66.6392) -> (-185.0286, -65.9319) projected
  arc A65 (-180.2471, -71.3291) -> (-185.0286, -65.9319) centre (-183.8909, -69.7406) ccw projected
  line L66 (-180.2471, -71.3291) -> (-181.2347, -73.5945) projected
  arc A66 (-181.2347, -73.5945) -> (-178.7645, -76.0647) centre (-105.17, 0) ccw projected
  line L67 (-178.7645, -76.0647) -> (-176.4991, -75.0771) projected
  arc A67 (-171.1019, -79.8586) -> (-176.4991, -75.0771) centre (-174.9106, -78.7209) ccw projected
  line L68 (-171.1019, -79.8586) -> (-171.8092, -82.2265) projected
  arc A68 (-171.8092, -82.2265) -> (-169.0593, -84.3809) centre (-105.17, 0) ccw projected
  line L69 (-169.0593, -84.3809) -> (-166.9295, -83.1275) projected
  arc A69 (-160.9953, -87.2236) -> (-166.9295, -83.1275) centre (-164.9134, -86.5532) ccw projected
  line L70 (-160.9953, -87.2236) -> (-161.4121, -89.6594) projected
  arc A70 (-161.4121, -89.6594) -> (-158.4225, -91.4667) centre (-105.17, 0) ccw projected
  line L71 (-158.4225, -91.4667) -> (-156.4593, -89.9657) projected
  arc A71 (-150.0746, -93.3166) -> (-156.4593, -89.9657) centre (-154.0449, -93.1234) ccw projected
  line L72 (-150.0746, -93.3166) -> (-150.1947, -95.7849) projected
  arc A72 (-150.1947, -95.7849) -> (-147.0091, -97.2187) centre (-105.17, 0) ccw projected
  line L73 (-147.0091, -97.2187) -> (-145.2412, -95.492) projected
  arc A73 (-138.4992, -98.0489) -> (-145.2412, -95.492) centre (-142.4638, -98.3357) ccw projected
  line L74 (-138.4992, -98.0489) -> (-138.3209, -100.5137) projected
  arc A74 (-138.3209, -100.5137) -> (-134.9857, -101.553) centre (-105.17, 0) ccw projected
  line L75 (-134.9857, -101.553) -> (-133.4388, -99.6258) projected
  arc A75 (-126.4377, -101.3514) -> (-133.4388, -99.6258) centre (-130.3388, -102.114) ccw projected
  line L76 (-126.4377, -101.3514) -> (-125.9636, -103.7767) projected
  arc A76 (-125.9636, -103.7767) -> (-122.5274, -104.4064) centre (-105.17, 0) ccw projected
  line L77 (-122.5274, -104.4064) -> (-121.2241, -102.3068) projected
  arc A77 (-114.066, -103.1759) -> (-121.2241, -102.3068) centre (-117.8468, -104.4032) ccw projected
  line L78 (-114.066, -103.1759) -> (-113.3031, -105.5265) projected
  arc A78 (-113.3031, -105.5265) -> (-109.816, -105.7374) centre (-105.17, 0) ccw projected
  line L79 (-109.816, -105.7374) -> (-108.7753, -103.496) projected
  arc A79 (-101.5647, -103.496) -> (-108.7753, -103.496) centre (-105.17, -105.17) ccw projected
  line L80 (-101.5647, -103.496) -> (-100.524, -105.7374) projected
  arc A80 (-100.524, -105.7374) -> (-97.0369, -105.5265) centre (-105.17, 0) ccw projected
  line L81 (-97.0369, -105.5265) -> (-96.274, -103.1759) projected
  arc A81 (-89.1159, -102.3068) -> (-96.274, -103.1759) centre (-92.4932, -104.4032) ccw projected
  line L82 (-89.1159, -102.3068) -> (-87.8126, -104.4064) projected
  arc A82 (-87.8126, -104.4064) -> (-84.3764, -103.7767) centre (-105.17, 0) ccw projected
  line L83 (-84.3764, -103.7767) -> (-83.9023, -101.3514) projected
  arc A83 (-76.9012, -99.6258) -> (-83.9023, -101.3514) centre (-80.0012, -102.114) ccw projected
  line L84 (-76.9012, -99.6258) -> (-75.3543, -101.553) projected
  arc A84 (-75.3543, -101.553) -> (-72.0191, -100.5137) centre (-105.17, 0) ccw projected
  line L85 (-72.0191, -100.5137) -> (-71.8408, -98.0489) projected
  arc A85 (-65.0988, -95.492) -> (-71.8408, -98.0489) centre (-67.8762, -98.3357) ccw projected
  line L86 (-65.0988, -95.492) -> (-63.3309, -97.2187) projected
  arc A86 (-63.3309, -97.2187) -> (-60.1453, -95.7849) centre (-105.17, 0) ccw projected
  line L87 (-60.1453, -95.7849) -> (-60.2654, -93.3166) projected
  arc A87 (-53.8807, -89.9657) -> (-60.2654, -93.3166) centre (-56.2951, -93.1234) ccw projected
  line L88 (-53.8807, -89.9657) -> (-51.9175, -91.4667) projected
  arc A88 (-51.9175, -91.4667) -> (-48.9279, -89.6594) centre (-105.17, 0) ccw projected
  line L89 (-48.9279, -89.6594) -> (-49.3447, -87.2236) projected
  arc A89 (-43.4105, -83.1275) -> (-49.3447, -87.2236) centre (-45.4266, -86.5532) ccw projected
  line L90 (-43.4105, -83.1275) -> (-41.2807, -84.3809) projected
  arc A90 (-41.2807, -84.3809) -> (-38.5308, -82.2265) centre (-105.17, 0) ccw projected
  line L91 (-38.5308, -82.2265) -> (-39.2381, -79.8586) projected
  arc A91 (-33.8409, -75.0771) -> (-39.2381, -79.8586) centre (-35.4294, -78.7209) ccw projected
  line L92 (-33.8409, -75.0771) -> (-31.5755, -76.0647) projected
  arc A92 (-31.5755, -76.0647) -> (-29.1053, -73.5945) centre (-105.17, 0) ccw projected
  line L93 (-29.1053, -73.5945) -> (-30.0929, -71.3291) projected
  arc A93 (-25.3114, -65.9319) -> (-30.0929, -71.3291) centre (-26.4491, -69.7406) ccw projected
  line L94 (-25.3114, -65.9319) -> (-22.9435, -66.6392) projected
  arc A94 (-22.9435, -66.6392) -> (-20.7891, -63.8893) centre (-105.17, 0) ccw projected
  line L95 (-20.7891, -63.8893) -> (-22.0425, -61.7595) projected
  arc A95 (-17.9464, -55.8253) -> (-22.0425, -61.7595) centre (-18.6168, -59.7434) ccw projected
  line L96 (-17.9464, -55.8253) -> (-15.5106, -56.2421) projected
  arc A96 (-15.5106, -56.2421) -> (-13.7033, -53.2525) centre (-105.17, 0) ccw projected
  line L97 (-13.7033, -53.2525) -> (-15.2043, -51.2893) projected
  arc A97 (-11.8534, -44.9046) -> (-15.2043, -51.2893) centre (-12.0466, -48.8749) ccw projected
  line L98 (-11.8534, -44.9046) -> (-9.3851, -45.0247) projected
  arc A98 (-9.3851, -45.0247) -> (-7.9513, -41.8391) centre (-105.17, 0) ccw projected
  line L99 (-7.9513, -41.8391) -> (-9.678, -40.0712) projected
  arc A99 (-7.1211, -33.3292) -> (-9.678, -40.0712) centre (-6.8343, -37.2938) ccw projected
  line L100 (-7.1211, -33.3292) -> (-4.6563, -33.1509) projected
  arc A100 (-4.6563, -33.1509) -> (-3.617, -29.8157) centre (-105.17, 0) ccw projected
  line L101 (-3.617, -29.8157) -> (-5.5442, -28.2688) projected
  arc A101 (-3.8186, -21.2677) -> (-5.5442, -28.2688) centre (-3.056, -25.1688) ccw projected
  line L102 (-3.8186, -21.2677) -> (-1.3933, -20.7936) projected
  arc A102 (-1.3933, -20.7936) -> (-0.7636, -17.3574) centre (-105.17, 0) ccw projected
  line L103 (-0.7636, -17.3574) -> (-2.8632, -16.0541) projected
  arc A103 (-1.9941, -8.896) -> (-2.8632, -16.0541) centre (-0.7668, -12.6768) ccw projected
  circle A104 centre (-105.17, 0) radius 8.5 projected
  circle A105 centre (-105.17, 0) radius 8.5 projected
  line L104 (-105.1545, -17.8) -> (-105.1545, -15.8)
  arc A106 (-102.5045, -17.5993) -> (-107.8045, -17.604) centre (-105.1536, -18.6497) ccw
  line L105 (-107.8045, -17.2766) -> (-107.8045, -18.3234) construction
  line L106 (-102.5045, -18.3234) -> (-102.5045, -17.2766) construction
  line L107 (-107.8045, -18.3234) -> (-102.5045, -18.3234) construction
  line L108 (-107.8045, -17.2766) -> (-102.5045, -18.3234) construction
  line L109 (-102.5045, -17.2766) -> (-107.8045, -18.3234) construction
  line L110 (-102.5045, -17.2766) -> (-107.8045, -17.2766) construction
  arc A107 (-121.7442, 6.4913) -> (-119.0982, 11.0835) centre (-121.3294, 9.3106) ccw
  arc A108 (-107.8355, 17.5993) -> (-102.5355, 17.604) centre (-105.1864, 18.6497) ccw
  arc A109 (-91.2613, 11.108) -> (-88.6073, 6.5204) centre (-89.0271, 9.3391) ccw
  arc A110 (-88.5958, -6.4913) -> (-91.2418, -11.0835) centre (-89.0106, -9.3106) ccw
  arc A111 (-119.0787, -11.108) -> (-121.7327, -6.5204) centre (-121.3129, -9.3391) ccw
  circle A112 centre (-105.17, 0) radius 20
  circle A113 centre (-105.17, 0) radius 17.8
  circle A114 centre (-105.17, 0) radius 8.5
  circle A115 centre (-105.17, 0) radius 24.5
  circle A116 centre (-105.17, 0) radius 23
  circle A117 centre (-105.17, 0) radius 24.5
  circle A118 centre (-105.17, 0) radius 22.5
  point P0 (-118.8609, 7.8866)
  point P1 (-105.1855, 15.8)
  point P2 (-91.4946, 7.9134)
  point P3 (-91.4791, -7.8866)
  point P4 (-118.8454, -7.9134)
  point P5 (-91.2418, -11.0835)
  point P6 (-88.5958, -6.4913)
  point P7 (-88.6073, 6.5204)
  point P8 (-91.2613, 11.108)
  point P9 (-102.5355, 17.604)
  point P10 (-107.8355, 17.5993)
  point P11 (-119.0982, 11.0835)
  point P12 (-121.7442, 6.4913)
  point P13 (-121.7327, -6.5204)
  point P14 (-119.0787, -11.108)
  dimension "d20" = 35.6
  dimension "d21" = 2
  dimension "d22" = 5.3
  dimension "d23" = 360
  dimension "d24" = 40
  dimension "d25" = 49
  dimension "d26" = 46
  dimension "d29" = 2
extrude "押し出し2" cut sketch "スケッチ4" against normal through all contours A106 A113 A111 A107 A108 A109 A110
sketch "スケッチ5" plane through (3.2, 18.9574, -103.4473) normal (1, 0, 0) x (0, 0.180255, -0.9836199)
  circle A0 centre (-107.7065, 69.9311) radius 15
  circle A1 centre (-105.17, 0) radius 90
  circle A2 centre (-105.17, 0) radius 30
  dimension "d30" = 30
  dimension "d31" = 180
  dimension "d32" = 60
extrude "押し出し3" cut sketch "スケッチ5" against normal blind 0.4
extrude "押し出し4" cut sketch "スケッチ5" against normal through all contours A0
pattern_circular "円形状パターン1" count 6 over 360 about axis through (3.2, 0, 0) along (-1, 0, 0) of "押し出し4"
sketch "スケッチ6" plane through (2.8, 0, 0) normal (1, 0, 0) x (0, 0, -1)
  circle A0 centre (-15.1004, 68.3284) radius 15 projected
  circle A1 centre (-66.7243, 21.0869) radius 15 projected
  line L0 (-66.7243, 21.0869) -> (-15.1004, 68.3284)
  circle A2 centre (-31.4807, 34.4011) radius 10
  point P0 (0, 0)
  dimension "d40" = 20
extrude "押し出し5" cut sketch "スケッチ6" against normal through all contours A2
pattern_circular "円形状パターン2" count 6 over 360 about axis through (3.2, 0, 0) along (-1, 0, 0) of "押し出し5"
sketch "スケッチ7" plane through (2.8, 0, 0) normal (1, 0, 0) x (0, 0, -1)
  circle A0 centre (0, 0) radius 34.0862
  circle A1 centre (0, 0) radius 115.853
extrude "押し出し6" cut sketch "スケッチ7" along normal mid plane 10
properties part number "KANA40A52D17_6-D25_PCD124.6(H 7 D 0/+0.1 25 N/A)"
